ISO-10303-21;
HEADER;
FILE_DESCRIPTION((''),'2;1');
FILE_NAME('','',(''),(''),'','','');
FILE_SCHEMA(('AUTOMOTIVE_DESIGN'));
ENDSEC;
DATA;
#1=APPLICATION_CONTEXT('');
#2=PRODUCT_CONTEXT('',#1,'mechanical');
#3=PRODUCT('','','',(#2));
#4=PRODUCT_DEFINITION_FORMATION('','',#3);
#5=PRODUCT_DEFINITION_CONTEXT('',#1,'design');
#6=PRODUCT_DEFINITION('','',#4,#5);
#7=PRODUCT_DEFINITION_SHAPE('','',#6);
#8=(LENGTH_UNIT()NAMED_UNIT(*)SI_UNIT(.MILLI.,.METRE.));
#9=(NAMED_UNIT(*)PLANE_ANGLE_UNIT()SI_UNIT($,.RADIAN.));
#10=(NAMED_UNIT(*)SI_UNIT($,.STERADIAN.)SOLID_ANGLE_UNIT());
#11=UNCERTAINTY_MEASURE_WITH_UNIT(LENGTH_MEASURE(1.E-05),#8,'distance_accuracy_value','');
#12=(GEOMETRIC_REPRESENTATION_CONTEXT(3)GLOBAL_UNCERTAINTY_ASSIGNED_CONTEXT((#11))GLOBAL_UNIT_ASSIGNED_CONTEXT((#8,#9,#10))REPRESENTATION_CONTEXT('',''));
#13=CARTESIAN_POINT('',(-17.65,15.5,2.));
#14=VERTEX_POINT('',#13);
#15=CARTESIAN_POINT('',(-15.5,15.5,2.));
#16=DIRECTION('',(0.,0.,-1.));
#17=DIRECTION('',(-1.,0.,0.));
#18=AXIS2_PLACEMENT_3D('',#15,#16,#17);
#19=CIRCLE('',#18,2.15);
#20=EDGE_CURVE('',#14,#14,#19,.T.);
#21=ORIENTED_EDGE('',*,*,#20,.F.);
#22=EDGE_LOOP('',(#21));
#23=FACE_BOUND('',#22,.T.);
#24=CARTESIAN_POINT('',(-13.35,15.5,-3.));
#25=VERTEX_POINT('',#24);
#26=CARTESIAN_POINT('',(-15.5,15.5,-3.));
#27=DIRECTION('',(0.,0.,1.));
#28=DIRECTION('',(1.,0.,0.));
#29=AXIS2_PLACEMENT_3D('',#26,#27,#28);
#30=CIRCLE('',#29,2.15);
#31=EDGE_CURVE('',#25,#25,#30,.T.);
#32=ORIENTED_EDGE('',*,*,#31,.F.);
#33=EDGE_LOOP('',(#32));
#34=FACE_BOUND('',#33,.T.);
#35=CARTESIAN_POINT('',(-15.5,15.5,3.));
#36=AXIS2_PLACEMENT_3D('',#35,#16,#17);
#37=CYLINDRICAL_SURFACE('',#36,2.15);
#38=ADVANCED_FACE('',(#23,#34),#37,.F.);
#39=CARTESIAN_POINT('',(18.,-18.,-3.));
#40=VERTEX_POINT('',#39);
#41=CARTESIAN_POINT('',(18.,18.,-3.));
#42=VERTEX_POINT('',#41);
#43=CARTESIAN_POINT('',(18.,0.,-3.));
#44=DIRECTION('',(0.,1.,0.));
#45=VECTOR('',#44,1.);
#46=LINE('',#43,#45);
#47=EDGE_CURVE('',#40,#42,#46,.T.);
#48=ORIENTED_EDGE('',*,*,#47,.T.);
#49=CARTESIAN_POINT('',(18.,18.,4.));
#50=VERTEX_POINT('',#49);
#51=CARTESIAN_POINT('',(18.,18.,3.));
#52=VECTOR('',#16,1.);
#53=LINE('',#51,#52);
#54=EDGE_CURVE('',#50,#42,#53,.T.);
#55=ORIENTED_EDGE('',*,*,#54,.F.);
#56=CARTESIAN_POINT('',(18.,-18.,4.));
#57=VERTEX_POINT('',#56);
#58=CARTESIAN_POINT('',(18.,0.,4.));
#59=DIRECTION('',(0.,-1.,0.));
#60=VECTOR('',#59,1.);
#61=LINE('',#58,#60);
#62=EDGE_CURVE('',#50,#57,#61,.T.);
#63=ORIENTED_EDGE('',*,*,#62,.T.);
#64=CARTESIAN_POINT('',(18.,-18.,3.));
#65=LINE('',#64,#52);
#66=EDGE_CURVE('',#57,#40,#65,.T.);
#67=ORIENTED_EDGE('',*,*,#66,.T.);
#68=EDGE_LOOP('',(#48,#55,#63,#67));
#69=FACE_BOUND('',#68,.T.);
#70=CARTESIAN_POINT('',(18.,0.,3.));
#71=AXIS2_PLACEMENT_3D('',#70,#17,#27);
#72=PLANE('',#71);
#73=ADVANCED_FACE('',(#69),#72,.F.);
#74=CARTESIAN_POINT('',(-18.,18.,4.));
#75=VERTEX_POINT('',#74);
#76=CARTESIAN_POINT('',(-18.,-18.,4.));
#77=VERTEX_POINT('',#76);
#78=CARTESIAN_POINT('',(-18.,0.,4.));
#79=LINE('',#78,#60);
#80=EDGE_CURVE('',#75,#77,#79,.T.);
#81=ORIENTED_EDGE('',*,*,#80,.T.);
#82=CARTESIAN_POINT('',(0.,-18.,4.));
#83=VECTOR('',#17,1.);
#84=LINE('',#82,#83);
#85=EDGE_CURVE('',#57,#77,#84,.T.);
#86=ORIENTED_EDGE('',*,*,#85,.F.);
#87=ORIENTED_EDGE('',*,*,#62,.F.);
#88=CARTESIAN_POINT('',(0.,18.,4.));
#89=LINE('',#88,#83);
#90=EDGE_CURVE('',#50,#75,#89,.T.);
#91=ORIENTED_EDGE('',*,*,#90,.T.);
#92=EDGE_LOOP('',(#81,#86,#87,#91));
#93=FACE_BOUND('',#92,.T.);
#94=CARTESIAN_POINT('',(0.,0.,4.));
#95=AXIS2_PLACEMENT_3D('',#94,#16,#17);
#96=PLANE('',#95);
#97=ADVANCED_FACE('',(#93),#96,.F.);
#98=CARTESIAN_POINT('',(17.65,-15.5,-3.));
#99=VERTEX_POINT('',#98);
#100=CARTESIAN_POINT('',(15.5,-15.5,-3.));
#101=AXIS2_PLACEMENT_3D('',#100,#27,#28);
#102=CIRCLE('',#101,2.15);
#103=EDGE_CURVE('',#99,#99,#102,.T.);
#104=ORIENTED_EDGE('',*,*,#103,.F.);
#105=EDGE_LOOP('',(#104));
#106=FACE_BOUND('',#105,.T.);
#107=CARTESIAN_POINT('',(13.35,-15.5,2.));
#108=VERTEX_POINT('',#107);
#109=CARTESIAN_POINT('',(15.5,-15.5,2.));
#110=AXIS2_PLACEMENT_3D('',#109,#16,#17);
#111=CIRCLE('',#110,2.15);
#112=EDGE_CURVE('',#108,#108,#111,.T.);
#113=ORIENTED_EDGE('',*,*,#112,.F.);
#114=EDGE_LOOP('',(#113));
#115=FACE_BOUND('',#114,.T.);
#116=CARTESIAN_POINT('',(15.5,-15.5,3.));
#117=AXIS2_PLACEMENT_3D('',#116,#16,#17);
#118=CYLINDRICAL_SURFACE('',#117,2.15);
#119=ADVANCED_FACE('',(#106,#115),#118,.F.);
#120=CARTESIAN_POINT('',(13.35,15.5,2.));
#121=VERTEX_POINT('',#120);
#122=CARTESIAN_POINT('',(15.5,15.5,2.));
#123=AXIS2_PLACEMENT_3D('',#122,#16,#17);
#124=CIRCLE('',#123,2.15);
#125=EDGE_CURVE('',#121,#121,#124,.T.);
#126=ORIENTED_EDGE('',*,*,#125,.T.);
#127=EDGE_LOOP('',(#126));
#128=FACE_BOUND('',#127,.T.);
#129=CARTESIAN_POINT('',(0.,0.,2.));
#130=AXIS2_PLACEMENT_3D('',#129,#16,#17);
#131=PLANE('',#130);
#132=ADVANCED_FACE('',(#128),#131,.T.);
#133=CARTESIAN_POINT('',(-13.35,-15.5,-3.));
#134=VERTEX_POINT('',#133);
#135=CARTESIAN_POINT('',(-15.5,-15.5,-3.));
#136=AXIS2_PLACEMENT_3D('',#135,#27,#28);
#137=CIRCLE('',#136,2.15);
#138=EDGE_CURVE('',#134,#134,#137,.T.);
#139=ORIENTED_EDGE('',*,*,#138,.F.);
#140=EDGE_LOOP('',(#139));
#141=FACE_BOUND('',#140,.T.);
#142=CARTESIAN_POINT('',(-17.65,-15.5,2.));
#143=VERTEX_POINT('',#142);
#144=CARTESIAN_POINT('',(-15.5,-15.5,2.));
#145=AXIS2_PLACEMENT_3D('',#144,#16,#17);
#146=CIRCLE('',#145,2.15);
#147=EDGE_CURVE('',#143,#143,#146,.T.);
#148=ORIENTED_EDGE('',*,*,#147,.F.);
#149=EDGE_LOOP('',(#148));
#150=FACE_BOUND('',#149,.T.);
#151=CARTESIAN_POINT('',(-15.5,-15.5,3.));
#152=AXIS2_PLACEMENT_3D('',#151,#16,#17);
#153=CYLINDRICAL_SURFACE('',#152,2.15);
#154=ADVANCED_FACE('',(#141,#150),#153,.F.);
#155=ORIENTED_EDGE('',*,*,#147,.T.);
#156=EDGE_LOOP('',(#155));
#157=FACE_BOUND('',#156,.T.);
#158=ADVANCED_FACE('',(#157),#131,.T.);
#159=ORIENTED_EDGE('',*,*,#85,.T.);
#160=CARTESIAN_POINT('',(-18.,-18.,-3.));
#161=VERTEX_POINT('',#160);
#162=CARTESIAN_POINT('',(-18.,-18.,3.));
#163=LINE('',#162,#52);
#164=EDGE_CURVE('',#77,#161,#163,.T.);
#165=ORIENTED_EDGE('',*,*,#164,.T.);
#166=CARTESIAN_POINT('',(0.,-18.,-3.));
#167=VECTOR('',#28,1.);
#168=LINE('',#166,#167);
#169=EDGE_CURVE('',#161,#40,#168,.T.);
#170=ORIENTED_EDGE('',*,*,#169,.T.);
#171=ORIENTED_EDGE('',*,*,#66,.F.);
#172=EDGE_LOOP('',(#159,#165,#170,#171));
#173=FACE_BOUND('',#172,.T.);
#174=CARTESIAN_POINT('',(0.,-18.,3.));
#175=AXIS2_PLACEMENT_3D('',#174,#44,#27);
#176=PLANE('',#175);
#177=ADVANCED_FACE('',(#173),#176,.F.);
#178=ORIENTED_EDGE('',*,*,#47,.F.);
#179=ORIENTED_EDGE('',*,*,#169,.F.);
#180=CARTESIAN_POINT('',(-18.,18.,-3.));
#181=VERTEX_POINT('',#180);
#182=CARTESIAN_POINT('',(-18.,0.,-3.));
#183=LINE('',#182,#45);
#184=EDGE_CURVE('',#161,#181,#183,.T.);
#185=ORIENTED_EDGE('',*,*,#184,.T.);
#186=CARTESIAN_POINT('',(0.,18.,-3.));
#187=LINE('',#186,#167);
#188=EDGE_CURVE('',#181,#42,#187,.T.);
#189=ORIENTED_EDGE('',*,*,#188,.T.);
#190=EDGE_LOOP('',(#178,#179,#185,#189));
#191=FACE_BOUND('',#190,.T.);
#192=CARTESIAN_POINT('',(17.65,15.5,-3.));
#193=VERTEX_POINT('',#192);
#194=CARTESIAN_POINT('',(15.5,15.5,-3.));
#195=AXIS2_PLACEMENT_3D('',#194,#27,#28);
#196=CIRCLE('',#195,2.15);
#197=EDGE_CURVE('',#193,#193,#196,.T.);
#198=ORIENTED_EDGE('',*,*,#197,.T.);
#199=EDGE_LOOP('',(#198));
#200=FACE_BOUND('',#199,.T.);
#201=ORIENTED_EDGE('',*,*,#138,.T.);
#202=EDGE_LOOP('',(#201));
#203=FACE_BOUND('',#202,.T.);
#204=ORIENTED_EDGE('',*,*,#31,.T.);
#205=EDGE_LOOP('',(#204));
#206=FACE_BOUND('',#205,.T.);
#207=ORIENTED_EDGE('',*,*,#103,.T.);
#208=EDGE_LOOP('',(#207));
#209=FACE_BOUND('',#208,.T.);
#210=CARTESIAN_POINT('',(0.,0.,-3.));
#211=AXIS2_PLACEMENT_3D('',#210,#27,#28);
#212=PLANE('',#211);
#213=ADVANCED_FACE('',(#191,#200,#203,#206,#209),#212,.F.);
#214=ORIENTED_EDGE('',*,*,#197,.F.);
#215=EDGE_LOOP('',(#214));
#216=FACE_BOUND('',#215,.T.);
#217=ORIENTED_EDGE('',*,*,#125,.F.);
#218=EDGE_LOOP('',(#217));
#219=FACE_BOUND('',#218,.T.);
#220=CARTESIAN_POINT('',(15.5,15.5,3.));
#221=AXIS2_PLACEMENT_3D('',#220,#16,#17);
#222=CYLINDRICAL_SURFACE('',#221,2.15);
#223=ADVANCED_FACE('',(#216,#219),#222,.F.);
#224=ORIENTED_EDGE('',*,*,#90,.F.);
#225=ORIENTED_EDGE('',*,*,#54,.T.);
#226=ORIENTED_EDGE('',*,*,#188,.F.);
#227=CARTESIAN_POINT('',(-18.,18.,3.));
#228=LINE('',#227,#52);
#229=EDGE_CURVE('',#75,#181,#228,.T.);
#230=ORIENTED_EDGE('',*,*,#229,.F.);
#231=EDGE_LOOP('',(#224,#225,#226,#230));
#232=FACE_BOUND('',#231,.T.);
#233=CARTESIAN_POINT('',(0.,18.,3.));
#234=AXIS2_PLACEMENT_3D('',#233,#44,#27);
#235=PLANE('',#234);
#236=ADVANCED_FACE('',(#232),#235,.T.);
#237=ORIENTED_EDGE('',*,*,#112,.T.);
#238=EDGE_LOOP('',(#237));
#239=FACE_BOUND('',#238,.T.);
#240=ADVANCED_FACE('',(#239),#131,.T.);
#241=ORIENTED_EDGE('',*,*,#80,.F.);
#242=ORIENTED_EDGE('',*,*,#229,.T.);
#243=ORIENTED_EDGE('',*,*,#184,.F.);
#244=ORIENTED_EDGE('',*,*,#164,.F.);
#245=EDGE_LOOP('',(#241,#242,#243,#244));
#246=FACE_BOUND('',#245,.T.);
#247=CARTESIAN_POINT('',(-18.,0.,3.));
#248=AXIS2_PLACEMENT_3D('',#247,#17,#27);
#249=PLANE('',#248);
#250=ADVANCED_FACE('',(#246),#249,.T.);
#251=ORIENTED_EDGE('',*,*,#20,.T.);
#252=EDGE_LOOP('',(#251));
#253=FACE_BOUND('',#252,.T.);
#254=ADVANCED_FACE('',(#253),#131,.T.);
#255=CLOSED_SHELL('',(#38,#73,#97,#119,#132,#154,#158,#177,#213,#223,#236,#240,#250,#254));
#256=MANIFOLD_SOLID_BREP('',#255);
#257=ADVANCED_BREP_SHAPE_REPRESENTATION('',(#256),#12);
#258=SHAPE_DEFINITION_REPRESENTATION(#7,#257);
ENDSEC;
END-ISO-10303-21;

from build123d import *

# Parameters (mm, degrees)
SKETCH1_W               = 36
SKETCH1_H               = 36
SKETCH1_R               = 2.15
BOSS_EXTRUDE1_DEPTH     = 3
BOSS_EXTRUDE2_START     = 2
BOSS_EXTRUDE2_OUTLINE_W = 36
BOSS_EXTRUDE2_OUTLINE_H = 36
BOSS_EXTRUDE2_DEPTH     = 2


# Read off the part's stored shape, not the designer's step: Boss-Extrude2
with BuildPart() as part:
    # Sketch1 → Boss-Extrude1 (new, symmetric)
    with BuildSketch(Plane.XY):
        Rectangle(SKETCH1_W, SKETCH1_H)
        with Locations((-15.5, 15.5)):
            Circle(SKETCH1_R, mode=Mode.SUBTRACT)
        with Locations((15.5, 15.5)):
            Circle(SKETCH1_R, mode=Mode.SUBTRACT)
        with Locations((15.5, -15.5)):
            Circle(SKETCH1_R, mode=Mode.SUBTRACT)
        with Locations((-15.5, -15.5)):
            Circle(SKETCH1_R, mode=Mode.SUBTRACT)
    extrude(amount=BOSS_EXTRUDE1_DEPTH, both=True)

    # Boss-Extrude2 outline → Boss-Extrude2 (add)
    with BuildSketch(Plane.XY.offset(BOSS_EXTRUDE2_START)):
        Rectangle(BOSS_EXTRUDE2_OUTLINE_W, BOSS_EXTRUDE2_OUTLINE_H)
    extrude(amount=BOSS_EXTRUDE2_DEPTH)


solid = part.part
